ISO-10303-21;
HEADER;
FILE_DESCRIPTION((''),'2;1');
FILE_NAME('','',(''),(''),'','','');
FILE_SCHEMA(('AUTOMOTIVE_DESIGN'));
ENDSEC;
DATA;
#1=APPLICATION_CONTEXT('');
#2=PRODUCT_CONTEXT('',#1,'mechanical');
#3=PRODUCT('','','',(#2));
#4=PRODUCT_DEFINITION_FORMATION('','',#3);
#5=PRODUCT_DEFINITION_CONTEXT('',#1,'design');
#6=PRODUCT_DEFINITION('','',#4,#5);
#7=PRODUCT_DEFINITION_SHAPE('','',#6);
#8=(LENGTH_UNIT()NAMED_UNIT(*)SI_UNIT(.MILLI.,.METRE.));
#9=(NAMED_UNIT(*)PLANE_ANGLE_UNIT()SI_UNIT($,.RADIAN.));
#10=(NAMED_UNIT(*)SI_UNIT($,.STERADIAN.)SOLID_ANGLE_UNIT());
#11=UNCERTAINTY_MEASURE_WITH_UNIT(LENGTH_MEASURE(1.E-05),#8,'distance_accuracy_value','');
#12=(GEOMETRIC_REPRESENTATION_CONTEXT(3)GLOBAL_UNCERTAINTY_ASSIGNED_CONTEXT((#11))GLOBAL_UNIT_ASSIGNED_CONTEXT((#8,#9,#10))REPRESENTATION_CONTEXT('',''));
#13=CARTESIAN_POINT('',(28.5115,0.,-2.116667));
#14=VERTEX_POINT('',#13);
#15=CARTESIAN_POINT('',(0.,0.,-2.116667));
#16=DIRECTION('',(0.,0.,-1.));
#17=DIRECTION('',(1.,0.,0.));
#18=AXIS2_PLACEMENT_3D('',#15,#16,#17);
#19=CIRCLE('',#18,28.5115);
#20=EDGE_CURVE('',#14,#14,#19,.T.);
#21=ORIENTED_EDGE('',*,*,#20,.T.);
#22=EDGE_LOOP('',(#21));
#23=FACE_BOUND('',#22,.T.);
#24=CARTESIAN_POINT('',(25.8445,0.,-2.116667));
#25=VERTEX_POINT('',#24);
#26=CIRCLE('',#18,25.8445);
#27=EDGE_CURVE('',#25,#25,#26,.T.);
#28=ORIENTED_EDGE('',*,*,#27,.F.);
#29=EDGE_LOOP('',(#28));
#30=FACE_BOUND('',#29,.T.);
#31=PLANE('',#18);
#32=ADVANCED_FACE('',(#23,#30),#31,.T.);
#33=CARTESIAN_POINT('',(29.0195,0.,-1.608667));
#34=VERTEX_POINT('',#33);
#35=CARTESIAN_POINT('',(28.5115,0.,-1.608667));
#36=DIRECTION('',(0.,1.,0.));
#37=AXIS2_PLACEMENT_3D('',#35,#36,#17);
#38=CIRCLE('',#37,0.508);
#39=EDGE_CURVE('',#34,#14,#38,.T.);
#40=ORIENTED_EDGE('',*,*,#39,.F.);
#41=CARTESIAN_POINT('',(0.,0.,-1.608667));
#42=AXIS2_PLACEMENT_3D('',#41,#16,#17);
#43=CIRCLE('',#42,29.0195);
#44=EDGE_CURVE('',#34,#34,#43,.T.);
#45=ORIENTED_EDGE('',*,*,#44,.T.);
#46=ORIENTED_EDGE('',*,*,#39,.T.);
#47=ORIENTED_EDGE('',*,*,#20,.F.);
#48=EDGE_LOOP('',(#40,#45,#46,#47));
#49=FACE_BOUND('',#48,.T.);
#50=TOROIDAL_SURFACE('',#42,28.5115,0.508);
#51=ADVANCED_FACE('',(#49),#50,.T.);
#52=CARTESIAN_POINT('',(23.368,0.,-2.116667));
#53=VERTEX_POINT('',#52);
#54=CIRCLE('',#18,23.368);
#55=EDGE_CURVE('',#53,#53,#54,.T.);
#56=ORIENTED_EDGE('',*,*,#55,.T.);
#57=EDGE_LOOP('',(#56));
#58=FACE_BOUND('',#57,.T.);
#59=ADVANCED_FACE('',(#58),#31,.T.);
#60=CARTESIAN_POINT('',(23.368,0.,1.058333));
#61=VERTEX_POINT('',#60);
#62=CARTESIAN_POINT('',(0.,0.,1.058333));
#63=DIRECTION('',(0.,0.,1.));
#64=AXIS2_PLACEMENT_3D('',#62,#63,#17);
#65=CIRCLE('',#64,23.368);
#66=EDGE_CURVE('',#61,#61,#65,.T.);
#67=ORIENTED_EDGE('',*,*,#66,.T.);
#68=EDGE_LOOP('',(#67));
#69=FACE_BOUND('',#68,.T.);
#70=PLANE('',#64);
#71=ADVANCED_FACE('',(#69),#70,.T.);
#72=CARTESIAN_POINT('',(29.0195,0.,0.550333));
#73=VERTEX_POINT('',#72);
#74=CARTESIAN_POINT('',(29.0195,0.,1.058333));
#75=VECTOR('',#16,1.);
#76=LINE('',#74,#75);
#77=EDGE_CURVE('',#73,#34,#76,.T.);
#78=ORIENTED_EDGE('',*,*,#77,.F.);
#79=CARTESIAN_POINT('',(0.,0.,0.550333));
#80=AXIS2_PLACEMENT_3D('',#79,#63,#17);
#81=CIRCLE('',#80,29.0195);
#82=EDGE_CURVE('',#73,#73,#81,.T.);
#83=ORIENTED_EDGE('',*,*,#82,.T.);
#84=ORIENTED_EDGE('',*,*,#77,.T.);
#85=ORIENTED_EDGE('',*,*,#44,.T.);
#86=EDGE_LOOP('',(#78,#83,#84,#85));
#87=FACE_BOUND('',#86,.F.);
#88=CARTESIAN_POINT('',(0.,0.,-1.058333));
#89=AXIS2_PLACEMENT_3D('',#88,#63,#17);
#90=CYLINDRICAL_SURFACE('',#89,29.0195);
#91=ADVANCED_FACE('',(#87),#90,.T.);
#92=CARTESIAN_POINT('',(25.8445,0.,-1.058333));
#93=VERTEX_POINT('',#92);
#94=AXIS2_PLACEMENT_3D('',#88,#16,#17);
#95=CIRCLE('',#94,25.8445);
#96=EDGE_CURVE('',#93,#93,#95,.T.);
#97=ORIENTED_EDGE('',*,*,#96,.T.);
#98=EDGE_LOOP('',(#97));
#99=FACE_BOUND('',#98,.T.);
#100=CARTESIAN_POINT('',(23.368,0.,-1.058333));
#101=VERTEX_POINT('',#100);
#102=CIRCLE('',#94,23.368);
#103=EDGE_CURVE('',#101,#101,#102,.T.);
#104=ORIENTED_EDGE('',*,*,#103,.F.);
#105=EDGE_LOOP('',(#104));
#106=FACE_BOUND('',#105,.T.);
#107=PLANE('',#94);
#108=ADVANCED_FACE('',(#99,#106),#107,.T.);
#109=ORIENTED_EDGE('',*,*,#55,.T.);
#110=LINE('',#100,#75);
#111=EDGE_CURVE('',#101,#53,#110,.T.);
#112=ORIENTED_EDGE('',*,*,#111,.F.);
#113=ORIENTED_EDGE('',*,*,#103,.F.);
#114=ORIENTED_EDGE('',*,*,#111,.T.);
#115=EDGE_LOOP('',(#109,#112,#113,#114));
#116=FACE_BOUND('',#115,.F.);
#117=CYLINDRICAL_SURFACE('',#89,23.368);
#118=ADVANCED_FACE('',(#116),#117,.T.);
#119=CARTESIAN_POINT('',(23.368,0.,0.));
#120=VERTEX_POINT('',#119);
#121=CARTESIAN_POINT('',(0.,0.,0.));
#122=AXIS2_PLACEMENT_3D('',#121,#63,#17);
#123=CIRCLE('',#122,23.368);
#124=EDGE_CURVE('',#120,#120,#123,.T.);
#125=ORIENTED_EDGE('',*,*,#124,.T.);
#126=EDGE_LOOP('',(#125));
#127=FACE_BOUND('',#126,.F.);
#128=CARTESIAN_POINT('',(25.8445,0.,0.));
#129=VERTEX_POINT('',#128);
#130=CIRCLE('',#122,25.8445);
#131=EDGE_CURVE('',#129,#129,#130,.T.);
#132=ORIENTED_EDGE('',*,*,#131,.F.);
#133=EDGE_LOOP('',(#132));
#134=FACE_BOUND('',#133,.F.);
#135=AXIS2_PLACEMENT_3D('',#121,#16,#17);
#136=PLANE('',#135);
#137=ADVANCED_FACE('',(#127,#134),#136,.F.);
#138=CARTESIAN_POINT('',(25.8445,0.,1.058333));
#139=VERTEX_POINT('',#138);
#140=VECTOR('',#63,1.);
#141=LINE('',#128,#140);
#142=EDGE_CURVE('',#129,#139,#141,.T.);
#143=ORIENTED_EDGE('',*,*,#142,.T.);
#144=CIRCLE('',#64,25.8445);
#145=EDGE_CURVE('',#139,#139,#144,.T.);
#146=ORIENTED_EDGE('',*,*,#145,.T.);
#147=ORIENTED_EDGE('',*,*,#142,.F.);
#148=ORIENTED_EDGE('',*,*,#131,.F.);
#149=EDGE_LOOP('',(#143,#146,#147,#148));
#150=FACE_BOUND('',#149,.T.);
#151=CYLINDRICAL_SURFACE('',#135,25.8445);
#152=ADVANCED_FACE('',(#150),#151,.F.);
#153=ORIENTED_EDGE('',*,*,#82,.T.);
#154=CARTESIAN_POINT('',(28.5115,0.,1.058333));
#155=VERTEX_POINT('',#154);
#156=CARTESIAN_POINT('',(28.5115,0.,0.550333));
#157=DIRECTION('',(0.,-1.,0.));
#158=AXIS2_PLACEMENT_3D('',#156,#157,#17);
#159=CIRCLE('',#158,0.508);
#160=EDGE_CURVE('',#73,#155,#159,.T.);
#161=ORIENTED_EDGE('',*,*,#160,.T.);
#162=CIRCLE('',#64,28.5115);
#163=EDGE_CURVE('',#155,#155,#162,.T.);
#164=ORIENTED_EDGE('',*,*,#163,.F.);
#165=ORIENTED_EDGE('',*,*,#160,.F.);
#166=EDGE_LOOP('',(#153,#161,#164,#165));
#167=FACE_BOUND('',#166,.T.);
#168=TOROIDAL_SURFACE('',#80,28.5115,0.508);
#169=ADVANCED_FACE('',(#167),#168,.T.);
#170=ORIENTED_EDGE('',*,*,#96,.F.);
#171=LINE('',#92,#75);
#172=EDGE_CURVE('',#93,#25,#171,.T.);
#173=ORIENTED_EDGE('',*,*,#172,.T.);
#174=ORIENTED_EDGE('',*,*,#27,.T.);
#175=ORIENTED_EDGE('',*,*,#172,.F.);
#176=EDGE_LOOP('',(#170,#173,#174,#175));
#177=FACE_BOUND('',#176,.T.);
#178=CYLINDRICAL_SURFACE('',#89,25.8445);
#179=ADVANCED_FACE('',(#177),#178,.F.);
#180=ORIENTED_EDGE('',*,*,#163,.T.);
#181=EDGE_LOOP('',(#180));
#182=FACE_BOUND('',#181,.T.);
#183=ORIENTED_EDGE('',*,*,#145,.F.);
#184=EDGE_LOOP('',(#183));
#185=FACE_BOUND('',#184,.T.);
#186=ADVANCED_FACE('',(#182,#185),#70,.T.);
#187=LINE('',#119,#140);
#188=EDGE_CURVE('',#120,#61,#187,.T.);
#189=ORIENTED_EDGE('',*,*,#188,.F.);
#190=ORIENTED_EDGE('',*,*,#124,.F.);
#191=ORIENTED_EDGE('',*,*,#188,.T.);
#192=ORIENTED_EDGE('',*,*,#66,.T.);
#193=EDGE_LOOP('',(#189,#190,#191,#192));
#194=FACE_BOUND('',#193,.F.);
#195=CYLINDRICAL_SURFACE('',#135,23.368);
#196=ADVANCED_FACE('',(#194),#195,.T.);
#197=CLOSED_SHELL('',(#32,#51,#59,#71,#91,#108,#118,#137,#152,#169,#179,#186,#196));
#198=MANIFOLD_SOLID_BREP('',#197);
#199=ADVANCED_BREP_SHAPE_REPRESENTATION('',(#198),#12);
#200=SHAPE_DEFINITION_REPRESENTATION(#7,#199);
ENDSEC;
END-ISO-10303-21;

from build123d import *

# Parameters (mm, degrees)
F0_R     = 23.368
F1_DEPTH = 1.0583333333
F0_R_2   = 29.0195
F0_R_3   = 25.8445
F2_R     = 29.0195
F2_R_2   = 23.368
F3_DEPTH = 1.0583333333
F4_R     = 29.0195
F4_R_2   = 25.8445
F4_R_3   = 23.368
F5_DEPTH = 1.0583333333
F6_R     = 0.508


with BuildPart() as f1:
    # F0 (on Top) → F1 (new body)
    with BuildSketch(Plane.XY):
        Circle(F0_R)
    extrude(amount=F1_DEPTH)



with BuildPart() as f1b:
    # F0 (on Top) → F1, piece 2 (new body)
    with BuildSketch(Plane.XY):
        Circle(F0_R_2)
        Circle(F0_R_3, mode=Mode.SUBTRACT)
    extrude(amount=F1_DEPTH)


with BuildPart() as f1_1:
    add(f1.part)

    add(f1b.part)  # F3 merges F1b
    # F2 (on face) → F3 (join)
    with BuildSketch(Plane(origin=(0, 0, 0), x_dir=(1, 0, 0), z_dir=(0, 0, -1))):
        Circle(F2_R)
        Circle(F2_R_2, mode=Mode.SUBTRACT)
        Circle(F2_R_2)
    extrude(amount=F3_DEPTH)

    # F4 (on face) → F5 (join)
    with BuildSketch(Plane(origin=(0, 0, -1.0583333333), x_dir=(1, 0, 0), z_dir=(0, 0, -1))):
        Circle(F4_R)
        Circle(F4_R_2, mode=Mode.SUBTRACT)
        Circle(F4_R_3)
    extrude(amount=F5_DEPTH)

    # F6
    f6_edges = [f1_1.edges().sort_by_distance(p)[0] for p in [
        (-29.0195, 0, -2.116667),
        (-29.0195, 0, 1.058333),
    ]]
    fillet(f6_edges, radius=F6_R)


solid = f1_1.part
